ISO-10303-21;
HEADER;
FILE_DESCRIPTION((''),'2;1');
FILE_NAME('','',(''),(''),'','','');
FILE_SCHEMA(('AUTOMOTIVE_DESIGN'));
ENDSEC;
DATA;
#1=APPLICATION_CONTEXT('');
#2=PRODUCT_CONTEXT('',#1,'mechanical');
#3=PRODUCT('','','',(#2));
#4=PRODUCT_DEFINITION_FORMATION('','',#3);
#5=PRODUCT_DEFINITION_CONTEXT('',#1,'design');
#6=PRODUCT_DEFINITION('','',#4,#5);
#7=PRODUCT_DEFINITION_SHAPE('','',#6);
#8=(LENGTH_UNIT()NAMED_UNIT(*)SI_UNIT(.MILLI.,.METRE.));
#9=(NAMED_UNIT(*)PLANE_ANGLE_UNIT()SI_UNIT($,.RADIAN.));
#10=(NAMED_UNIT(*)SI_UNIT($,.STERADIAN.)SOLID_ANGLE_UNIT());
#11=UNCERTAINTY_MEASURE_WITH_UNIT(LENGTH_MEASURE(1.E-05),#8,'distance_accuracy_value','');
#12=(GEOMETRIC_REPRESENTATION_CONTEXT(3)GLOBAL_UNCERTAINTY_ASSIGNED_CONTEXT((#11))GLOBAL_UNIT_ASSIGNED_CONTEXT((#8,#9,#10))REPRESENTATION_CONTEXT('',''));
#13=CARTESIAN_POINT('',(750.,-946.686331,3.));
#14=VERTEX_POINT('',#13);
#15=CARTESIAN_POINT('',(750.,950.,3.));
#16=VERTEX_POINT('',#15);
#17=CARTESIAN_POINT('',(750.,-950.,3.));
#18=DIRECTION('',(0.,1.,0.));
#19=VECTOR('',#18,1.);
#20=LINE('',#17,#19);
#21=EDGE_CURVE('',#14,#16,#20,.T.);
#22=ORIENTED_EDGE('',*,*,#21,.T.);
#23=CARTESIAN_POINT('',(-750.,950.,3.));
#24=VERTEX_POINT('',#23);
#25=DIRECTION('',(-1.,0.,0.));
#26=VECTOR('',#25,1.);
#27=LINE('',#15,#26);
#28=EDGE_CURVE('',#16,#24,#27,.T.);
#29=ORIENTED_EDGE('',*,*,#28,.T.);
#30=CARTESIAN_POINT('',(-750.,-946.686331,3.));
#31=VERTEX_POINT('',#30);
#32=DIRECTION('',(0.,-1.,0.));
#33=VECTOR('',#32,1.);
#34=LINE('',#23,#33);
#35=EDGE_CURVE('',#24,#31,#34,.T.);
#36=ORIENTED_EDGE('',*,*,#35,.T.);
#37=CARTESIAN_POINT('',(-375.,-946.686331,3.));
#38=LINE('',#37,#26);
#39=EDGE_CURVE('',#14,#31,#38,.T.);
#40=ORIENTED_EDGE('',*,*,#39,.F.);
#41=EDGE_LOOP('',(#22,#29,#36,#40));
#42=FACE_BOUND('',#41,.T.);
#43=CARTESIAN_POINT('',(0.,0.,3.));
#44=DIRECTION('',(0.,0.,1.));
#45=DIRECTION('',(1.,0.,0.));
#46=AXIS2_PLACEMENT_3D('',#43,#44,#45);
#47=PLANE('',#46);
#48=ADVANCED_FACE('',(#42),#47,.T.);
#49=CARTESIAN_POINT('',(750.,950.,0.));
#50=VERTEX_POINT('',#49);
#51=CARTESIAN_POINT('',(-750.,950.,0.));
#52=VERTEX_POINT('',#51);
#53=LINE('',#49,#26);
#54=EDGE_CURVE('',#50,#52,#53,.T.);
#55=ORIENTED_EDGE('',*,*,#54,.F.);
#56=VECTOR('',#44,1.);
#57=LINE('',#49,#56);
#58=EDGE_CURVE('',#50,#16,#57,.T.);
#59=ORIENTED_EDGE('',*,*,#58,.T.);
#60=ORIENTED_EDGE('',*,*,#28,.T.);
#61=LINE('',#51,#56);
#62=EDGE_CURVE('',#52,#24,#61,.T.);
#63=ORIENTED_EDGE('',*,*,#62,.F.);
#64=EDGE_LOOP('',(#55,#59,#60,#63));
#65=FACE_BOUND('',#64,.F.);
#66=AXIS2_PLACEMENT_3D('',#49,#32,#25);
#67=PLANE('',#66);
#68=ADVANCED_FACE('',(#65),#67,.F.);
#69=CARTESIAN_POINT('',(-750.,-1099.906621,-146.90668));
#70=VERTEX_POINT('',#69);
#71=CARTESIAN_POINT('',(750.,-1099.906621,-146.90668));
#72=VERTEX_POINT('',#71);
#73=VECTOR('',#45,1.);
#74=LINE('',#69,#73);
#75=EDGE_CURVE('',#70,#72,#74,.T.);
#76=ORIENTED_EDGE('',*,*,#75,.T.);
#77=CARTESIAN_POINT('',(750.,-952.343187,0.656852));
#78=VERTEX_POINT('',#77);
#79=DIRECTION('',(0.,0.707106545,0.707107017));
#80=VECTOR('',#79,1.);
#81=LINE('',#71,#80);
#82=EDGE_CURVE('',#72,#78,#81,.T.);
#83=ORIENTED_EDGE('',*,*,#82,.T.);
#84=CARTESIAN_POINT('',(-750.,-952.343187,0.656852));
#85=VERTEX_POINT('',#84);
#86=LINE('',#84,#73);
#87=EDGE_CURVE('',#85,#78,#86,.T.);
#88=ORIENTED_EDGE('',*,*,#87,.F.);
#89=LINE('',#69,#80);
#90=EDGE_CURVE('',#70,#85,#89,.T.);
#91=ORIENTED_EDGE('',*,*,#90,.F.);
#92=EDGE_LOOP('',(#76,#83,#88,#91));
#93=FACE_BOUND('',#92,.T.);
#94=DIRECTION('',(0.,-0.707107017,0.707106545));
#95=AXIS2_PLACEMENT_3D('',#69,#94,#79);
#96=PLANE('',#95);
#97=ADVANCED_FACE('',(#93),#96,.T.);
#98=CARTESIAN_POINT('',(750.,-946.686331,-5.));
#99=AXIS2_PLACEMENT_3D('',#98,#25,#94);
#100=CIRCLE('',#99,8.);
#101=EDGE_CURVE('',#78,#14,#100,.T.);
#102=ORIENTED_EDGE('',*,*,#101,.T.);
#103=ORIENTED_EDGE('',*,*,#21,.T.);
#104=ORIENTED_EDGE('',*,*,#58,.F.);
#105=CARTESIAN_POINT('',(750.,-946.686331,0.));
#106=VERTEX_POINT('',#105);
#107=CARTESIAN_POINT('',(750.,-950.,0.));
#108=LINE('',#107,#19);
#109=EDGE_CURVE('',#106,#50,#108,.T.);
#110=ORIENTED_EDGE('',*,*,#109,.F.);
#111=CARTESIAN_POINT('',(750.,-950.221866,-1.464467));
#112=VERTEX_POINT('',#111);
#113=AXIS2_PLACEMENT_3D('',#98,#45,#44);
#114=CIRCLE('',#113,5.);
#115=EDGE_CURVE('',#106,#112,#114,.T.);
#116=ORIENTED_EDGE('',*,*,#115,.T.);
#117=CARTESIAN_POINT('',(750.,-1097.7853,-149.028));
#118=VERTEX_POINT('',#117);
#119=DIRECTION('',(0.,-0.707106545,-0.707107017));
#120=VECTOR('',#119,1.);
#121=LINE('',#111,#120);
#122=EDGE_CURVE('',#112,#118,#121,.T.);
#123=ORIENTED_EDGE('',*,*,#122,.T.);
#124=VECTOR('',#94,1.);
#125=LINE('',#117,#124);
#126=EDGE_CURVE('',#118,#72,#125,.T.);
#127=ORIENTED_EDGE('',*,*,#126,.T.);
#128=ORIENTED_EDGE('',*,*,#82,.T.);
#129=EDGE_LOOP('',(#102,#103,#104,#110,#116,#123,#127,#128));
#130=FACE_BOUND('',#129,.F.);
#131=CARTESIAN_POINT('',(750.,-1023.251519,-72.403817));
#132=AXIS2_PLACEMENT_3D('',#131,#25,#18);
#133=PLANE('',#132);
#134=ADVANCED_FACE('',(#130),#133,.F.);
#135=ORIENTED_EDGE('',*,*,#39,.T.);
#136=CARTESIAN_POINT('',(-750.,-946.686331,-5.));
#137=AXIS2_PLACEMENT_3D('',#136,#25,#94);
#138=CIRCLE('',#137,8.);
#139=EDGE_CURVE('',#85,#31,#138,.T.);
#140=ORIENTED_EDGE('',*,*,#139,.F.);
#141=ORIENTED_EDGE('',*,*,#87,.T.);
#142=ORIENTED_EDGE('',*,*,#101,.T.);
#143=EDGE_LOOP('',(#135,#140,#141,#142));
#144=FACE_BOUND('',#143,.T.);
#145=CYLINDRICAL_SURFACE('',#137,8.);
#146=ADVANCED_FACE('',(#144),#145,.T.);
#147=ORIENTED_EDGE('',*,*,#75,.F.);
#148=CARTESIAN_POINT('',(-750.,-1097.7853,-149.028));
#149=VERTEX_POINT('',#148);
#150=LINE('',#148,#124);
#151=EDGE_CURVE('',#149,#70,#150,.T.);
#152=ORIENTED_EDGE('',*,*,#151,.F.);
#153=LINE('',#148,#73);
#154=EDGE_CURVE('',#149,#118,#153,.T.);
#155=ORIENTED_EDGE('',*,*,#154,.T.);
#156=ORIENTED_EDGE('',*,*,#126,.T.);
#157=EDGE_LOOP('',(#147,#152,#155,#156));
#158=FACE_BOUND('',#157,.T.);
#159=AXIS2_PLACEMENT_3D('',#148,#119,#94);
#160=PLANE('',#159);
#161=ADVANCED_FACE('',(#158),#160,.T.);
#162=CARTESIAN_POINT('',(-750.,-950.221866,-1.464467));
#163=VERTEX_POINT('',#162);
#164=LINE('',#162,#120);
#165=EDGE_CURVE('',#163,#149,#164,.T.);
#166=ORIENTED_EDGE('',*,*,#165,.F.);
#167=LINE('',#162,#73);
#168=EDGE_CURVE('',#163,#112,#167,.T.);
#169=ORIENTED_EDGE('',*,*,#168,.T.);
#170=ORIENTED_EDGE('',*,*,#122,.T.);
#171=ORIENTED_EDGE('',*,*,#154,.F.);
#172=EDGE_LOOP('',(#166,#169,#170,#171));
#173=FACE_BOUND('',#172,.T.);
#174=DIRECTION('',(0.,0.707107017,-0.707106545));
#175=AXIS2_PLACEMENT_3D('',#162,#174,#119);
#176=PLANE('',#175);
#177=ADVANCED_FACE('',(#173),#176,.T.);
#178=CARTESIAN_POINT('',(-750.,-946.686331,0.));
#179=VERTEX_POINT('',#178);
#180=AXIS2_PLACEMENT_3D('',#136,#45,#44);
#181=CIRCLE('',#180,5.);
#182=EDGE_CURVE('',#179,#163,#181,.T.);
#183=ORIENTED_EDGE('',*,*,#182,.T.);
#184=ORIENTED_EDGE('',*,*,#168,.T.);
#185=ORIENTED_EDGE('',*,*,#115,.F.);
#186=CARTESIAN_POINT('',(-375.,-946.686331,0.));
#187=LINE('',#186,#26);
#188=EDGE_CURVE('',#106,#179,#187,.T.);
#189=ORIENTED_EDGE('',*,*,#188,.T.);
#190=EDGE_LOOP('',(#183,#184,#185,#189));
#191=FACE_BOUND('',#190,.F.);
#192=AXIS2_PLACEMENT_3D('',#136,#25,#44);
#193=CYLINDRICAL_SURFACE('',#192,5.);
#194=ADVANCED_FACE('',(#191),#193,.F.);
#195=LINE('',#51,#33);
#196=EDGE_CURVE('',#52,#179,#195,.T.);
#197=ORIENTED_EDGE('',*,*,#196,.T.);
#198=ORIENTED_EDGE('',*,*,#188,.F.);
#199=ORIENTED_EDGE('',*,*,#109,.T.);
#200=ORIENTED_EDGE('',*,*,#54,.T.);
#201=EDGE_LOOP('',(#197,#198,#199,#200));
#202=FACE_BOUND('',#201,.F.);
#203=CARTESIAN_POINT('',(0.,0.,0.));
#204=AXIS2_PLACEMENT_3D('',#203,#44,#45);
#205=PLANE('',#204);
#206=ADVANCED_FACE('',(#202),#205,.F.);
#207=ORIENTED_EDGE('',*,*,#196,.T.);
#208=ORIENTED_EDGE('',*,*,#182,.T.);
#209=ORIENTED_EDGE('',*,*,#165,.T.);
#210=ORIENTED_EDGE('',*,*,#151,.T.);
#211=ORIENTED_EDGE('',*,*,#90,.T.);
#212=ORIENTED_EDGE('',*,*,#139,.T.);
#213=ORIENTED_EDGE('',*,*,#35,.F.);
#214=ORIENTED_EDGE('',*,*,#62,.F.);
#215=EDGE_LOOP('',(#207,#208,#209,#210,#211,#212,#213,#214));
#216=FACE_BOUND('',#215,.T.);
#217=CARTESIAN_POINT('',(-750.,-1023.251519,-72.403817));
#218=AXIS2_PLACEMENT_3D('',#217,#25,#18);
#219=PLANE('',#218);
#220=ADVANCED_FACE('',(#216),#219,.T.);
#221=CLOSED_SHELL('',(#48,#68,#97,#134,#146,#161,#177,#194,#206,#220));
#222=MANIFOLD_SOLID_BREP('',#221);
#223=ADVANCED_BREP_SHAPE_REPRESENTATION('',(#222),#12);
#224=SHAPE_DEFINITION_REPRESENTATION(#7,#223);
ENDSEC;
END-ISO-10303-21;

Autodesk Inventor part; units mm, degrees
ref_plane "YZ Plane" through (0, 0, 0) normal (1, 0, 0) x (0, 1, 0)
ref_plane "XZ Plane" through (0, 0, 0) normal (0, 1, 0) x (-1, 0, 0)
ref_plane "XY Plane" through (0, 0, 0) normal (0, 0, 1) x (1, 0, 0)
sketch "Sketch1" plane through (0, 0, 0) normal (0, 0, 1) x (1, 0, 0)
  line L0 (-750, -950) -> (750, -950)
  line L1 (750, -950) -> (750, 950)
  line L2 (750, 950) -> (-750, 950)
  line L3 (-750, 950) -> (-750, -950)
  line L4 (-750, -950) -> (750, 950) construction
  line L5 (750, -950) -> (-750, 950) construction
  point P0 (0, 0)
  dimension "d0" = 1500
  dimension "d1" = 1900
extrude "Plate1" add sketch "Sketch1" along normal blind 3
sketch "Sketch3" plane through (-750, -947.8787, 0.8787) normal (0, -0.7071068, 0.7071068) x (1, 0, 0)
  line L0 (1500, 0) -> (0, 0)
  line L1 (0, 0) -> (0, -212)
  line L2 (0, -212) -> (1500, -212)
  line L3 (1500, -212) -> (1500, 0)
edge flange "Flange2" height 212 angle 45 thickness 3 bend radius 5 thickness toward (0, -0.7071068, 0.7071068) relief round relief width 3 relief depth 1.5 edges at (0, -950, 0) wall of the first edge with corners at (750, -947.8787, 0.8787) (-750, -947.8787, 0.8787) (-750, -1097.7853, -149.028) (750, -1097.7853, -149.028)
bend "Bend2"
corner "Corner2"
sketch "Sketch4" plane through (750, -1097.7853, -149.028) normal (0, 0.7071068, -0.7071068) x (-1, 0, 0)
  line L0 (1475, 36.661) -> (1475, 25) construction
  line L1 (1475, 25) -> (1275, 25) construction
  line L2 (1275, 25) -> (1275, 36.661) construction
  line L3 (1275, 36.661) -> (1475, 36.661) construction
  line L4 (0, 0) -> (1500, 0) projected
  line L5 (1500, 208.6863) -> (1500, 0) projected
  point P0 (750, 881.6301)
  point P1 (1475, 30.8305)
  dimension "d23" = 200
  dimension "d24" = 11.661
  dimension "d25" = 25
  dimension "d26" = 25
mark "Mark1"
equation "\"d2\" = Thickness"
equation "\"d13\" = BendReliefWidth"
equation "\"d14\" = BendReliefDepth"
equation "\"d15\" = MinimumRemnant"
equation "\"d16\" = TransitionRadius"
equation "\"d19\" = BendRadius"
equation "\"d20\" = CornerReliefSize"
equation "\"d21\" = GapSize"
equation "\"d22\" = JacobiRadiusSize"
equation "\"BendReliefWidth\" = Thickness"
equation "\"BendReliefDepth\" = 0.5 * Thickness"
equation "\"CornerReliefSize\" = 4 * Thickness"
equation "\"MinimumRemnant\" = 2 * Thickness"
equation "\"TransitionRadius\" = BendRadius"
equation "\"JacobiRadiusSize\" = BendRadius"
equation "\"GapSize\" = Thickness"
equation "\"Thickness\" = 3"
equation "\"BendRadius\" = 5"
properties part number "BSH 012 floor 2" material "09g2s"
